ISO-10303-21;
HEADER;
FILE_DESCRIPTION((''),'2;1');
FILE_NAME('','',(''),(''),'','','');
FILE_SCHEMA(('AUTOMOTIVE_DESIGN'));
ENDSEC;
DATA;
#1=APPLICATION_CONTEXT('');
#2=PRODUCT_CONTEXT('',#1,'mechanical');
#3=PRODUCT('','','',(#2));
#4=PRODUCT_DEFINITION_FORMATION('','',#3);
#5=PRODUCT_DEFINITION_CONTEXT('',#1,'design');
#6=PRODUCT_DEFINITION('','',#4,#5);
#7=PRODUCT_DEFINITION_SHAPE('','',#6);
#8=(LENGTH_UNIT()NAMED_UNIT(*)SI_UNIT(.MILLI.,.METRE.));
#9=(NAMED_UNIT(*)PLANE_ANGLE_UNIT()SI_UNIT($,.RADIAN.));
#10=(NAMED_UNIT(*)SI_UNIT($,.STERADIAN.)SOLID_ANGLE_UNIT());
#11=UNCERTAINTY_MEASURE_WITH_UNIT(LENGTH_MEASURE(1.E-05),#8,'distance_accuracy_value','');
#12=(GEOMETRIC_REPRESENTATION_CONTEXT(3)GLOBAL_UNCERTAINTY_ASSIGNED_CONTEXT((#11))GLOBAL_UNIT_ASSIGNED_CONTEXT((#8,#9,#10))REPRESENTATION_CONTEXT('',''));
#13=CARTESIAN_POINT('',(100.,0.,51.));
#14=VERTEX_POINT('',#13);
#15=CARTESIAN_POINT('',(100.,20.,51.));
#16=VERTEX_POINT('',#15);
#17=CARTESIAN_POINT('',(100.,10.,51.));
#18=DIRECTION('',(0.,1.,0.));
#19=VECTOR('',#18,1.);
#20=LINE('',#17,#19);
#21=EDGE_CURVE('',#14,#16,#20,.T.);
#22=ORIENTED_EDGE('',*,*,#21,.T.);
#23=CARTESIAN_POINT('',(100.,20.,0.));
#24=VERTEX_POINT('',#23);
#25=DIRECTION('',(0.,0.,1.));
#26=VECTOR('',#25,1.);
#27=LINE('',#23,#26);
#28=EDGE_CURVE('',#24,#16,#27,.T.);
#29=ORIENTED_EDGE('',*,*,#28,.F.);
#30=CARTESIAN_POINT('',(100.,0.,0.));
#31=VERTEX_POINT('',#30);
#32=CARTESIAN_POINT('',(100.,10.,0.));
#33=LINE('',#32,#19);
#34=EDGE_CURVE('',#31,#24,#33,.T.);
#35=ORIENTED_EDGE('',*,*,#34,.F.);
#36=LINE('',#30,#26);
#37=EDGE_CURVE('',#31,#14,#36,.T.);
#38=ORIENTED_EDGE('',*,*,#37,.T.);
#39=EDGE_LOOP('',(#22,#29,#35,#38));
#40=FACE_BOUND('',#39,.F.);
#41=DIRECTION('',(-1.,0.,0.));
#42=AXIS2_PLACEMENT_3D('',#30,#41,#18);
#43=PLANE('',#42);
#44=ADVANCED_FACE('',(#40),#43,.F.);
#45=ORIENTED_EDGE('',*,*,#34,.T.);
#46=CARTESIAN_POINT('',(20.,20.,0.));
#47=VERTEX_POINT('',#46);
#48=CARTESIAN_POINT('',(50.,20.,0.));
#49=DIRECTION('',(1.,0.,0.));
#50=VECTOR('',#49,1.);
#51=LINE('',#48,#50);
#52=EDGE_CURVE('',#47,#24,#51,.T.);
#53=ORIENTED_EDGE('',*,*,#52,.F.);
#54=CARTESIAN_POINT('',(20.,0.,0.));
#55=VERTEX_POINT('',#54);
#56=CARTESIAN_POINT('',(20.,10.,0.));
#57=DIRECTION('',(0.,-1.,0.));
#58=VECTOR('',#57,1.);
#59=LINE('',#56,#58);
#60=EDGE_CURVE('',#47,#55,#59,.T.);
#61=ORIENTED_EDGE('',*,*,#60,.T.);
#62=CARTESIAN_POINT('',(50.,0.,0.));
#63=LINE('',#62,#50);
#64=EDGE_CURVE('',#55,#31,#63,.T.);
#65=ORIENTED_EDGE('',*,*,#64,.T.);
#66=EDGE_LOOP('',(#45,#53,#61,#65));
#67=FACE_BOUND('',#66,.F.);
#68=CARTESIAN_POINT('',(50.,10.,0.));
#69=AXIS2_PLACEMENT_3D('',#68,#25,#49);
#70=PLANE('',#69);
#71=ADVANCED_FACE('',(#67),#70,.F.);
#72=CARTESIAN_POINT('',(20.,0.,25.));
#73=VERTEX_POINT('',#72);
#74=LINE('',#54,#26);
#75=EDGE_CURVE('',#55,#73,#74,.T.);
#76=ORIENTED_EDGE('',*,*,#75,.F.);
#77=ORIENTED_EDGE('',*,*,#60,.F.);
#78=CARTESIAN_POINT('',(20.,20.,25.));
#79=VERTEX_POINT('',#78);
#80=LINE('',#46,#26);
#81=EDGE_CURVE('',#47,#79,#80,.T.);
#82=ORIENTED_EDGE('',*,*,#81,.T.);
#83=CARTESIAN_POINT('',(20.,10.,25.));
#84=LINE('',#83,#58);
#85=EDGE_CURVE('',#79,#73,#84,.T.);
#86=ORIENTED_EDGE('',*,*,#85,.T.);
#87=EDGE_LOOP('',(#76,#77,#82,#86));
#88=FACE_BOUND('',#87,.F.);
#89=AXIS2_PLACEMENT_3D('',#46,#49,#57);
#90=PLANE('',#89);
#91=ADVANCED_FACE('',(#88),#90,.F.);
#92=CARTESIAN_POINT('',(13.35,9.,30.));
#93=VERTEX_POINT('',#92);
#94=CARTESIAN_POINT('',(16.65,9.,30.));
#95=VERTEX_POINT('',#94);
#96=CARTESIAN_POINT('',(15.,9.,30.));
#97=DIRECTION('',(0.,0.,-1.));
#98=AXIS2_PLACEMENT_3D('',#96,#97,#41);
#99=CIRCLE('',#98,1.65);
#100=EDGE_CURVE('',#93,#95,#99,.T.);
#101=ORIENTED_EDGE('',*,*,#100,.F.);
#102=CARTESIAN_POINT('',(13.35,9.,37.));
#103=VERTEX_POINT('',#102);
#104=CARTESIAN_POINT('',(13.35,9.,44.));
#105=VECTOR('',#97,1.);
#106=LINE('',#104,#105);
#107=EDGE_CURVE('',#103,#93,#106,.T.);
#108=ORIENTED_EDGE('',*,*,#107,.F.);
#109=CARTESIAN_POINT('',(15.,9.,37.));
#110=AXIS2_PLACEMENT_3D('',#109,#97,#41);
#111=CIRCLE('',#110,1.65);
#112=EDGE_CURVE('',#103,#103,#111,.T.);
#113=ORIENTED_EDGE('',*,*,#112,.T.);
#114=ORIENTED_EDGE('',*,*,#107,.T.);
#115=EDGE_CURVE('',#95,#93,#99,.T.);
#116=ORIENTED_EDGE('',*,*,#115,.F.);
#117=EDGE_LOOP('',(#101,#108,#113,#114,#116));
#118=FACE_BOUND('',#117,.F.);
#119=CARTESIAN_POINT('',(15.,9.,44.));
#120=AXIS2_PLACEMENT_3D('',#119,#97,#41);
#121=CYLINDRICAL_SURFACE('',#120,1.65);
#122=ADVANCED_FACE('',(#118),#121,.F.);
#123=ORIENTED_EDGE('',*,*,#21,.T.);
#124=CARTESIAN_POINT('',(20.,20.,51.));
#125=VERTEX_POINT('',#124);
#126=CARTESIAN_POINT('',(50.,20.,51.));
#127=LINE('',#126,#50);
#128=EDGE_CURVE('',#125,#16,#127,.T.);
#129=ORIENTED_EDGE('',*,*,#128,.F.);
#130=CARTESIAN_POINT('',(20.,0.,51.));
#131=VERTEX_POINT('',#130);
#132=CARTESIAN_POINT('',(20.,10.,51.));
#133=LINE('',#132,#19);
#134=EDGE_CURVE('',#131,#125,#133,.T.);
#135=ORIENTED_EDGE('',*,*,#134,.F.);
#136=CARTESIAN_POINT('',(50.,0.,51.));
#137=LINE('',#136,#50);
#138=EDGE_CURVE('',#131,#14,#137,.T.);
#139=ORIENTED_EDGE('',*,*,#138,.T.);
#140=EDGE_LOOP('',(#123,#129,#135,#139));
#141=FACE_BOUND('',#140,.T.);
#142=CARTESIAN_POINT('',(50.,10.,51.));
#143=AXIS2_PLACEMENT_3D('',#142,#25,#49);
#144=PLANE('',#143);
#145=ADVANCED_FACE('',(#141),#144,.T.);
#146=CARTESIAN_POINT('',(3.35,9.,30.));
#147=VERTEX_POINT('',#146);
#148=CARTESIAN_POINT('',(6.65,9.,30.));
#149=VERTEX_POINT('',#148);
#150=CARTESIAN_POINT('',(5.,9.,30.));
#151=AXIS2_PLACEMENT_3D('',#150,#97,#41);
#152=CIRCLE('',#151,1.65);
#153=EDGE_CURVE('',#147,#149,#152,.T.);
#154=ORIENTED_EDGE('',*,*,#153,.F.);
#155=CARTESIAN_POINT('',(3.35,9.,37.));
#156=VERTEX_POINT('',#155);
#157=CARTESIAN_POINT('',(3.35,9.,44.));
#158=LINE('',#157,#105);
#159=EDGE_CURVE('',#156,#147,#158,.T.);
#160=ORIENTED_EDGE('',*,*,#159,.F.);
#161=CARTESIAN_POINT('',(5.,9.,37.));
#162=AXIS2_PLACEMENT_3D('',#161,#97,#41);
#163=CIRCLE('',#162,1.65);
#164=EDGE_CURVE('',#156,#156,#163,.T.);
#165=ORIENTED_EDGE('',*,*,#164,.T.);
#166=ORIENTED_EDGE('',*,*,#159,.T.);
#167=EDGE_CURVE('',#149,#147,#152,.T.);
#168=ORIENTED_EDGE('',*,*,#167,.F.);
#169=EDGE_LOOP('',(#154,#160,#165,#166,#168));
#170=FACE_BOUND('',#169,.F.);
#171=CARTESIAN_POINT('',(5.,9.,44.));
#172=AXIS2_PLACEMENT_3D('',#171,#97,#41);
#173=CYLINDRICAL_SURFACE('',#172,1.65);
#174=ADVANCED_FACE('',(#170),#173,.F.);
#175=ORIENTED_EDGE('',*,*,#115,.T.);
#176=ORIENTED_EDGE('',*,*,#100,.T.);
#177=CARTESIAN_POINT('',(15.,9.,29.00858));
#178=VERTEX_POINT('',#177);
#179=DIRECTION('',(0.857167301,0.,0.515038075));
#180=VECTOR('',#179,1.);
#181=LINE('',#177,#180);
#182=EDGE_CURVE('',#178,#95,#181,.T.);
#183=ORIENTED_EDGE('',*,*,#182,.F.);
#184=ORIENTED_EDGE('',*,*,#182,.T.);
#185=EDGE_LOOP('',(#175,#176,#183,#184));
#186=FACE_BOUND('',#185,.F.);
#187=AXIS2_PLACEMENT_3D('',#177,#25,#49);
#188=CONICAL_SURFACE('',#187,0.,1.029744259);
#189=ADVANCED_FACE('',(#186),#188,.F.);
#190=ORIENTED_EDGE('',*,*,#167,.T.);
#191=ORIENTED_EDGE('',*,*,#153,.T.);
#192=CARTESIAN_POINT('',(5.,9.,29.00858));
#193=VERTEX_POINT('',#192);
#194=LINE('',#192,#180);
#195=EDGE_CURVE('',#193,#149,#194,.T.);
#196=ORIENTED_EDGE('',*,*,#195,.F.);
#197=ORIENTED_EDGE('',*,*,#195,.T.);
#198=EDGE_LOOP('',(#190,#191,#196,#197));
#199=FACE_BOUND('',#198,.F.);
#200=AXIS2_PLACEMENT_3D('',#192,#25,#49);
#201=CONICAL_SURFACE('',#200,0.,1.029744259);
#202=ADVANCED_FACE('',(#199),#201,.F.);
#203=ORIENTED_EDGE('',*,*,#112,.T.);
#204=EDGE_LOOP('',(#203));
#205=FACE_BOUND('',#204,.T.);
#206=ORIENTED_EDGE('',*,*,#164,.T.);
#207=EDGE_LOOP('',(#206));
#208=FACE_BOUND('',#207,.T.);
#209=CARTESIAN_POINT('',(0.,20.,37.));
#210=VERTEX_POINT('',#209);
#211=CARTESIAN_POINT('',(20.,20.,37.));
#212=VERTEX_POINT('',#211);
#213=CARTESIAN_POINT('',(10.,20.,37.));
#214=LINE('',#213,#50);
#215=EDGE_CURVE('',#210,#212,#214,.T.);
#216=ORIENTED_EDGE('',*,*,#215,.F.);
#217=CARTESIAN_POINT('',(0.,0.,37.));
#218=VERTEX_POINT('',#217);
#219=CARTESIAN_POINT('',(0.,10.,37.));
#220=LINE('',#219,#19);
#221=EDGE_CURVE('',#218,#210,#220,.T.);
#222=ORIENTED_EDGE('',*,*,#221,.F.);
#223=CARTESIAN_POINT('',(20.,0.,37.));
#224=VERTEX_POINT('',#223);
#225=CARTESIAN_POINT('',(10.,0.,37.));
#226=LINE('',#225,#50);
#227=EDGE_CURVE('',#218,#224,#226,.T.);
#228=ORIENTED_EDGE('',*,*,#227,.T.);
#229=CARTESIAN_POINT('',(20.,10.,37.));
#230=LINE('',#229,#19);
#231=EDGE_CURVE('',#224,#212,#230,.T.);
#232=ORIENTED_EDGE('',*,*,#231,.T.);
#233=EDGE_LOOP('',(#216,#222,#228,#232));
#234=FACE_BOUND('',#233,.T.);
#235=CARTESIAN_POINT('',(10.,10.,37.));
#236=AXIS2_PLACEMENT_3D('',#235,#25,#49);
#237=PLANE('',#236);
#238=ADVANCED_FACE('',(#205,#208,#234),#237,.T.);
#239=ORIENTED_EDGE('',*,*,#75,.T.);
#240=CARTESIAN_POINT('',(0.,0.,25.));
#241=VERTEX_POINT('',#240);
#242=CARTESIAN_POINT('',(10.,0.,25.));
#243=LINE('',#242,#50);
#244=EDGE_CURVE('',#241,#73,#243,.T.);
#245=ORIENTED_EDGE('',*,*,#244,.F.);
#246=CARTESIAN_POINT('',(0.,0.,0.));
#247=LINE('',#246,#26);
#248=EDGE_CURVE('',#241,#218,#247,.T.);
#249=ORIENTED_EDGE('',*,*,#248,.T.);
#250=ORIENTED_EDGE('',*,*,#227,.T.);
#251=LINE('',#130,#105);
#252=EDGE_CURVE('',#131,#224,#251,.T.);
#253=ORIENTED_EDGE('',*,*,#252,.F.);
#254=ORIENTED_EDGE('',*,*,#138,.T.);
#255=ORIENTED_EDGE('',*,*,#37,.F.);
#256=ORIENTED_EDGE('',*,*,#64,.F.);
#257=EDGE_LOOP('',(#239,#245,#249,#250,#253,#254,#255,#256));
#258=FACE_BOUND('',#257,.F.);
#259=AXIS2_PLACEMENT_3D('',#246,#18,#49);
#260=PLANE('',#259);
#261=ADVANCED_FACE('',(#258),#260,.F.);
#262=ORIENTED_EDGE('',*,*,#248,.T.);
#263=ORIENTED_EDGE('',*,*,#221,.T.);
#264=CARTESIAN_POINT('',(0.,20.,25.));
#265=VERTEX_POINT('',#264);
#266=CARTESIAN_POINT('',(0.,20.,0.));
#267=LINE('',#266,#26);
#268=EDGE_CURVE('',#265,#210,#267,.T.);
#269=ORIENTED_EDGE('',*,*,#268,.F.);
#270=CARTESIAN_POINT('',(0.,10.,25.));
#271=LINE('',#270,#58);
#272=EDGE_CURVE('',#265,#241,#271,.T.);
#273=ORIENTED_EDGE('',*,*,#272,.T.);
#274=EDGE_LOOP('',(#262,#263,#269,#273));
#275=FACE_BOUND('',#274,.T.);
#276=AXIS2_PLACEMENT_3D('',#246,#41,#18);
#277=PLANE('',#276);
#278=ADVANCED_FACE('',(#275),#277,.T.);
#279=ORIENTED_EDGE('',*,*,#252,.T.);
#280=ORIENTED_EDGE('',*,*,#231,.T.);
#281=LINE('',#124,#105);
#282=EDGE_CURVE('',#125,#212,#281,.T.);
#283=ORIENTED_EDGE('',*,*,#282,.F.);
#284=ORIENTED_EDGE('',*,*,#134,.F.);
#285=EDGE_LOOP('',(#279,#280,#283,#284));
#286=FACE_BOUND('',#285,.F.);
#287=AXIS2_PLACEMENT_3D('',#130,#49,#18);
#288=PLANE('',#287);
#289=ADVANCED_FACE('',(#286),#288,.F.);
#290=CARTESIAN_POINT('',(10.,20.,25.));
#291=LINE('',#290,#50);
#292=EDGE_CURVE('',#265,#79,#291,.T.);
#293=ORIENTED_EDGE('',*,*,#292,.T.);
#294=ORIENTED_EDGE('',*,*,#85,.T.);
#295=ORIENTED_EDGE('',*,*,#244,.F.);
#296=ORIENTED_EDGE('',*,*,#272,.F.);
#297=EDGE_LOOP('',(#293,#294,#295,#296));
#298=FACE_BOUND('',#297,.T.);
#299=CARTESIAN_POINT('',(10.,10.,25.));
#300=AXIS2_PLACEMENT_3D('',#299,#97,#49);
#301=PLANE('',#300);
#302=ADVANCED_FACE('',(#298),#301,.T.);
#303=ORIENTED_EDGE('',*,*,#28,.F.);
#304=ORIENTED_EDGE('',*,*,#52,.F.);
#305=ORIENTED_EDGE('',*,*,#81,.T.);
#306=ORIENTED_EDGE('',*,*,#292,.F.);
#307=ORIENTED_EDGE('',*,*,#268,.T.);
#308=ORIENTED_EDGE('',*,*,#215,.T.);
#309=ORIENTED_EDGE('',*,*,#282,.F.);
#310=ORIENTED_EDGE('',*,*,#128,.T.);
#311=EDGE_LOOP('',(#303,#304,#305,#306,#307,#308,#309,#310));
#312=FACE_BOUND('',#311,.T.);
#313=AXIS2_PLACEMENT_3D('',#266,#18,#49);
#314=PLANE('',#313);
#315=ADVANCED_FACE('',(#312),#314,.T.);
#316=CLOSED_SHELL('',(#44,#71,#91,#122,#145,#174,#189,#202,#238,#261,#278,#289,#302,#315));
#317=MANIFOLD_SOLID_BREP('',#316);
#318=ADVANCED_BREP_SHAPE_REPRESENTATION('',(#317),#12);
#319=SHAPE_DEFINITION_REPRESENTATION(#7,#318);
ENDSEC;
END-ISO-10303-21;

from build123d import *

# Parameters (mm, degrees)
F0_W     = 100
F0_H     = 20
F1_DEPTH = 51
F2_W     = 20
F2_H     = 20
F3_DEPTH = 14
F5_D     = 3.3
F5_DEPTH = 7
F5_TIP   = 0.9914200214
F6_W     = 20
F6_H     = 20
F7_DEPTH = 25


with BuildPart() as f1:
    # F0 (on Top) → F1 (new body)
    with BuildSketch(Plane.XY):
        with Locations((50, 10)):
            Rectangle(F0_W, F0_H)
    extrude(amount=F1_DEPTH)

    # F2 (on face) → F3 (cut)
    with BuildSketch(Plane.XY.offset(51)):
        with Locations((10, 10)):
            Rectangle(F2_W, F2_H)
    extrude(amount=-F3_DEPTH, mode=Mode.SUBTRACT)

    # F5
    with Locations(Plane.XY.offset(37)):
        with Locations((5, 9), (15, 9)):
            Hole(F5_D / 2, depth=F5_DEPTH)
            with Locations((0, 0, -(F5_DEPTH + F5_TIP / 2))):  # 118° drill point
                Cone(0, F5_D / 2, F5_TIP, mode=Mode.SUBTRACT)

    # F6 (on face) → F7 (cut)
    with BuildSketch(Plane(origin=(0, 0, 0), x_dir=(1, 0, 0), z_dir=(0, 0, -1))):
        with Locations((10, -10)):
            Rectangle(F6_W, F6_H)
    extrude(amount=-F7_DEPTH, mode=Mode.SUBTRACT)


solid = f1.part
